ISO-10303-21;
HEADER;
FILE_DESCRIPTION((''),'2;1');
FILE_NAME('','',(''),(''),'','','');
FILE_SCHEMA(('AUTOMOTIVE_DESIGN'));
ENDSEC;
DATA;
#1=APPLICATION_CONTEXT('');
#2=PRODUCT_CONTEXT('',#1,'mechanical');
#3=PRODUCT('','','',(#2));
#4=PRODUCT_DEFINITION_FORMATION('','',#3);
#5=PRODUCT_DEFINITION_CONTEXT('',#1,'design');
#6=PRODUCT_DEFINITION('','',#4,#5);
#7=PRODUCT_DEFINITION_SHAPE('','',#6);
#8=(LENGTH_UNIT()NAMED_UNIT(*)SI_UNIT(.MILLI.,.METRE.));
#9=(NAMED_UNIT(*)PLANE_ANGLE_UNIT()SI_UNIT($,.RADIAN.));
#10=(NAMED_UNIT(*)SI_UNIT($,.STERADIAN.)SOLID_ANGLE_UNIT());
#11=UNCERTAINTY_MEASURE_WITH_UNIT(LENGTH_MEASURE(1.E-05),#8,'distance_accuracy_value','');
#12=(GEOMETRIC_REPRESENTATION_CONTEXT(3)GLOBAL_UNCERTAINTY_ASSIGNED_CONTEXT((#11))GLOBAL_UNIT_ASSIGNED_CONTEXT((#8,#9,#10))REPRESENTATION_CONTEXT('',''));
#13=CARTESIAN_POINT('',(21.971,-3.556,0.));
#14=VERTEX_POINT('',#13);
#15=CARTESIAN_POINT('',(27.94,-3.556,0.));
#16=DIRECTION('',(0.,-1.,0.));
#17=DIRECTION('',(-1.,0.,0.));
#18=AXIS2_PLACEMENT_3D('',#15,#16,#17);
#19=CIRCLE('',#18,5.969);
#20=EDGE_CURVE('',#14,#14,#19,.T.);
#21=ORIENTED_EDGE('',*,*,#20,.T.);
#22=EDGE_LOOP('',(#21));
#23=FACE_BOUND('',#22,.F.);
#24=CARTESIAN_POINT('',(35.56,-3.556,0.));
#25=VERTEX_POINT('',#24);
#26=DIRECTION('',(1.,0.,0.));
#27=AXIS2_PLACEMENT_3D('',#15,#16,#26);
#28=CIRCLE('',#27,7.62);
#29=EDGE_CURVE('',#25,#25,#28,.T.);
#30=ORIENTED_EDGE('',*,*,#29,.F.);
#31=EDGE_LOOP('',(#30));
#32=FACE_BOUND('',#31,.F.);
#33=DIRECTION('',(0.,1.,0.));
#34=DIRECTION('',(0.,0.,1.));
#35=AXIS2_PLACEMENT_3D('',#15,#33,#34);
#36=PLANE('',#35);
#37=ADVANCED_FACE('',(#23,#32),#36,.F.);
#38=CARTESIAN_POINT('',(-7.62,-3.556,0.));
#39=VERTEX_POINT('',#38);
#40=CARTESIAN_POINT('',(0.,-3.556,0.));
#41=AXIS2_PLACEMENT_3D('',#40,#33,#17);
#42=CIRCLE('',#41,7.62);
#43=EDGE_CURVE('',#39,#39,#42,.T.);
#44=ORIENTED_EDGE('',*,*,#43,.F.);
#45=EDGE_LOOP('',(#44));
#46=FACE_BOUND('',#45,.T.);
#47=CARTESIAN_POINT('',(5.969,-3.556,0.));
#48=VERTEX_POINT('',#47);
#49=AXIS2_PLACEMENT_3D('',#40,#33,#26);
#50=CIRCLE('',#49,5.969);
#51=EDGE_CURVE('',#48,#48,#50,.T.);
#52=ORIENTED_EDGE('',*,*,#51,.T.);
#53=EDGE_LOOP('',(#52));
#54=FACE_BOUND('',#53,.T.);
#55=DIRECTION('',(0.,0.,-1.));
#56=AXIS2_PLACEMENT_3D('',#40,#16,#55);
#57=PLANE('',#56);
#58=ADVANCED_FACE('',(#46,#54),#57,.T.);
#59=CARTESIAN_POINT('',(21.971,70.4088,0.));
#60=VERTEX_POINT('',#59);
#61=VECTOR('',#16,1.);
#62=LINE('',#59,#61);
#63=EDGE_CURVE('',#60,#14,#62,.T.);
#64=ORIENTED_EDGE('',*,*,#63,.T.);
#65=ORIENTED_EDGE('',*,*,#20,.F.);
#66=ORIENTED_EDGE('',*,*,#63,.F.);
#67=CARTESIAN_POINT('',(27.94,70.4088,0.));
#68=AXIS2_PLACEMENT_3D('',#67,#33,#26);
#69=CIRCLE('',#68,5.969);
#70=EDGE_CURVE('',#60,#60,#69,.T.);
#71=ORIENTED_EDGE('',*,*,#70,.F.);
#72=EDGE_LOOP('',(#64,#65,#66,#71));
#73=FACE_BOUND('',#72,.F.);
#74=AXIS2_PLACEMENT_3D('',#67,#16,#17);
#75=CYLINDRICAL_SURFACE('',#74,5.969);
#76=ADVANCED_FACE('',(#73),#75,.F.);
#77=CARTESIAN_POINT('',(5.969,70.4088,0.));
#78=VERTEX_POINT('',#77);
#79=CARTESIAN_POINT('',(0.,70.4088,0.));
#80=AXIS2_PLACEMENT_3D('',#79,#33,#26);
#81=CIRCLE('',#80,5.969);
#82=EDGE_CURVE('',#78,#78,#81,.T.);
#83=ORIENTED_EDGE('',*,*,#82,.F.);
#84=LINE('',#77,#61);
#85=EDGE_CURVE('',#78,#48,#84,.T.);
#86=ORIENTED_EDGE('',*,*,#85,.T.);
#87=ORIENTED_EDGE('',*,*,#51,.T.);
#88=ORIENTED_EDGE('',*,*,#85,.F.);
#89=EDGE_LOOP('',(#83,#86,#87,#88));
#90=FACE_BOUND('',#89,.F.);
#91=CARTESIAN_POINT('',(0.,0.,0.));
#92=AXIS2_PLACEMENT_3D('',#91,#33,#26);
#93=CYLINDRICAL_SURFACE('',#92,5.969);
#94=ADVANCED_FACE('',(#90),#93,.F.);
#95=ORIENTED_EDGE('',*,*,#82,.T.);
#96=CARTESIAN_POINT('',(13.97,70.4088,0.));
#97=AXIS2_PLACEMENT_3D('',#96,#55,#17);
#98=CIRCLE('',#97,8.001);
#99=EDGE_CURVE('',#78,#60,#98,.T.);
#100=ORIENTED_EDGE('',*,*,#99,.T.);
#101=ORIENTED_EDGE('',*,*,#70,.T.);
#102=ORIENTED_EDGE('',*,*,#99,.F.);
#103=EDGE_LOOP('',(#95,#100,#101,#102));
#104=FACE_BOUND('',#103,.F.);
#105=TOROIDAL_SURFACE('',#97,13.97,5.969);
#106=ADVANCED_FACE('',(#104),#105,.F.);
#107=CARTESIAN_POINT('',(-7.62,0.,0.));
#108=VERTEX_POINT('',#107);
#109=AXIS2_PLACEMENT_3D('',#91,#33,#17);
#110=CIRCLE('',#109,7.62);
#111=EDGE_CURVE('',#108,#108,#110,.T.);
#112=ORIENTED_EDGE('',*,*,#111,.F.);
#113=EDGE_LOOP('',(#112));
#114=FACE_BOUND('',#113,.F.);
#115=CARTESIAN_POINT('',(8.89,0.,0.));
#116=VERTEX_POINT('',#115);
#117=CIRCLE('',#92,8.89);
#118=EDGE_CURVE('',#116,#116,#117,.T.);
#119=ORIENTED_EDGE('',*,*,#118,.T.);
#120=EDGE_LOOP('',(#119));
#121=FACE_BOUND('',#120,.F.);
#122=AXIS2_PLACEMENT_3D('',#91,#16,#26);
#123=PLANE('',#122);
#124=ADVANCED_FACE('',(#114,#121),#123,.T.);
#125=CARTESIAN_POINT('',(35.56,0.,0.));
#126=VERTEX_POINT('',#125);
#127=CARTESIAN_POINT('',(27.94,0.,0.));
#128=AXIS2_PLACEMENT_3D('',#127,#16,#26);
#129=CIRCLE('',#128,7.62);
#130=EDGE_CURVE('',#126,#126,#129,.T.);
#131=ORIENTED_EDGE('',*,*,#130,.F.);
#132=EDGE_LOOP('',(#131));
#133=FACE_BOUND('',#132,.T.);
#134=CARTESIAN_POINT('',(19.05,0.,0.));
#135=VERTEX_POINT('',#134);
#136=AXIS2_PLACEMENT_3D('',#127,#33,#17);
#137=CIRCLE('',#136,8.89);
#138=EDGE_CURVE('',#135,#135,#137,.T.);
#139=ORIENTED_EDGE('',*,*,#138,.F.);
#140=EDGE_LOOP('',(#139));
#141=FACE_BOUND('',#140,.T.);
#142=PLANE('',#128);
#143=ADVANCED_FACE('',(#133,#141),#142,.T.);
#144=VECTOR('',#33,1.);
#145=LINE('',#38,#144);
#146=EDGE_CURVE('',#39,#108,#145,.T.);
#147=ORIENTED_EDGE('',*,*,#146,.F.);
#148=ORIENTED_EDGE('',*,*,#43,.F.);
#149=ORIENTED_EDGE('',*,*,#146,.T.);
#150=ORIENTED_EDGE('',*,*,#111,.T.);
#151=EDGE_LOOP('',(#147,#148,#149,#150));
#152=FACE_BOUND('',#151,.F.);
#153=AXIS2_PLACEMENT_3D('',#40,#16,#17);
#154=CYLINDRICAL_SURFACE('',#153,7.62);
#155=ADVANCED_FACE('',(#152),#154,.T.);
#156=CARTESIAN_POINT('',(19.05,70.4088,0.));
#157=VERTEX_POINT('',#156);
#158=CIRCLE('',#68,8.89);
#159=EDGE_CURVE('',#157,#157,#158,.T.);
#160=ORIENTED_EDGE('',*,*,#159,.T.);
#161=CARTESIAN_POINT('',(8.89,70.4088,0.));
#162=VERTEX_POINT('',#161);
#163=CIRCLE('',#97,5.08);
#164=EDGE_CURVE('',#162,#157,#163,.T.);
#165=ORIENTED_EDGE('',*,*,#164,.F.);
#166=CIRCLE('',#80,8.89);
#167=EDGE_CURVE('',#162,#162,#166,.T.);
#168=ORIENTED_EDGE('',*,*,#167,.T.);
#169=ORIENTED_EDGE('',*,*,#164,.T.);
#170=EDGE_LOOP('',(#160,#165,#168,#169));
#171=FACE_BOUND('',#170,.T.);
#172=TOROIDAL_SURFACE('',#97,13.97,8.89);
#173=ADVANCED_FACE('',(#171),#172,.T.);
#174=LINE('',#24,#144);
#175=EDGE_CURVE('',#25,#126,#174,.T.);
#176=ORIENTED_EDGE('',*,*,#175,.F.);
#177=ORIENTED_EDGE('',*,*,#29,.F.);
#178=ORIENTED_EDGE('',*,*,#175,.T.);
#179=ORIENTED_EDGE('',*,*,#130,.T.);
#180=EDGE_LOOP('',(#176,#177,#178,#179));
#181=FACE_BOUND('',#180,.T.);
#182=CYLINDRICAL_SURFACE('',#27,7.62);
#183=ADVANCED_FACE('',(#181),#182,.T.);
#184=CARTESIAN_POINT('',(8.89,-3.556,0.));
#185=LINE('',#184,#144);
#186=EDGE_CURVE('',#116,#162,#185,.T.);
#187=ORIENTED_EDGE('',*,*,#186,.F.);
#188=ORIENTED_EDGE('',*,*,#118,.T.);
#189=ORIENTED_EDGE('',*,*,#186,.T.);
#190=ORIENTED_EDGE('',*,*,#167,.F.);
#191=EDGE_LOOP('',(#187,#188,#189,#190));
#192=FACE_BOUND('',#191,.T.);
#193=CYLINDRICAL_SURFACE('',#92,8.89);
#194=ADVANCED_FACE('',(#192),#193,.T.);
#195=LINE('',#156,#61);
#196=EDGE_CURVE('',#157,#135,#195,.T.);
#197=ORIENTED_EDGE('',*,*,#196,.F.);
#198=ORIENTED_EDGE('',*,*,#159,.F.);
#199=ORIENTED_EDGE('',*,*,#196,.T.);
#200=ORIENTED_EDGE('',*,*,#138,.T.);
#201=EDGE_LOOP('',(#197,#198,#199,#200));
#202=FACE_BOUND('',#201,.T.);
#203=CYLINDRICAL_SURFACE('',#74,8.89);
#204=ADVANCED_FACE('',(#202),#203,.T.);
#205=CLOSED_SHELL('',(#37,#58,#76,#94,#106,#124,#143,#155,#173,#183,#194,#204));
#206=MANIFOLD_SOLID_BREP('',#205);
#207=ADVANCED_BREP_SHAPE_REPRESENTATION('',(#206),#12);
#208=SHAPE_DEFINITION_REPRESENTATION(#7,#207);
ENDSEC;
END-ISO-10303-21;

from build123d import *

# Parameters (mm, degrees)
F1_R     = 8.89
F1_R_2   = 5.969
F3_DEPTH = 3.556
F5_R     = 8.89
F5_R_2   = 7.62
F7_DEPTH = 3.556


# Not quite as in the source:
# - a feature of the source that left no trace in its solid (it failed there, or was rolled back) is left out
# - a pattern or mirror of a feature is missing from the dataset's text; its kind, count and spacing are read off the source's solid


with BuildPart() as f2:
    # F2: sweep along a path in F0
    with BuildLine(Plane.XY) as f2_path:
        Line((0, 0), (0, 70.4088))
        ThreePointArc((0, 70.4088), (13.97, 84.3788), (27.94, 70.4088))
        Line((27.94, 70.4088), (27.94, 0))
        Line((27.94, 0), (27.94, -3.556))
    # F1 (on Front) → F2 (sweep)
    with BuildSketch(Plane.XZ):
        Circle(F1_R)
        Circle(F1_R_2, mode=Mode.SUBTRACT)
    sweep(path=f2_path.line)

    # F3 (add): a face of the model
    f3_faces = [f2.faces().sort_by_distance(p)[0] for p in [
        (-8.6385528286, 0, 0),
    ]]
    extrude(f3_faces, amount=F3_DEPTH)

    # F5 (on face) → F7 (cut)
    with BuildSketch(Plane.XZ.offset(3.556)):
        with Locations((27.94, 0)):
            Circle(F5_R)
        with Locations((27.94, 0)):
            Circle(F5_R_2, mode=Mode.SUBTRACT)
    f7 = extrude(amount=-F7_DEPTH, mode=Mode.SUBTRACT)

    # F7_copies: F7 across plane
    add(f7.mirror(Plane(origin=(13.97, 0, 0), x_dir=(0, 0, -1), z_dir=(-1, 0, 0))), mode=Mode.SUBTRACT)


solid = f2.part
